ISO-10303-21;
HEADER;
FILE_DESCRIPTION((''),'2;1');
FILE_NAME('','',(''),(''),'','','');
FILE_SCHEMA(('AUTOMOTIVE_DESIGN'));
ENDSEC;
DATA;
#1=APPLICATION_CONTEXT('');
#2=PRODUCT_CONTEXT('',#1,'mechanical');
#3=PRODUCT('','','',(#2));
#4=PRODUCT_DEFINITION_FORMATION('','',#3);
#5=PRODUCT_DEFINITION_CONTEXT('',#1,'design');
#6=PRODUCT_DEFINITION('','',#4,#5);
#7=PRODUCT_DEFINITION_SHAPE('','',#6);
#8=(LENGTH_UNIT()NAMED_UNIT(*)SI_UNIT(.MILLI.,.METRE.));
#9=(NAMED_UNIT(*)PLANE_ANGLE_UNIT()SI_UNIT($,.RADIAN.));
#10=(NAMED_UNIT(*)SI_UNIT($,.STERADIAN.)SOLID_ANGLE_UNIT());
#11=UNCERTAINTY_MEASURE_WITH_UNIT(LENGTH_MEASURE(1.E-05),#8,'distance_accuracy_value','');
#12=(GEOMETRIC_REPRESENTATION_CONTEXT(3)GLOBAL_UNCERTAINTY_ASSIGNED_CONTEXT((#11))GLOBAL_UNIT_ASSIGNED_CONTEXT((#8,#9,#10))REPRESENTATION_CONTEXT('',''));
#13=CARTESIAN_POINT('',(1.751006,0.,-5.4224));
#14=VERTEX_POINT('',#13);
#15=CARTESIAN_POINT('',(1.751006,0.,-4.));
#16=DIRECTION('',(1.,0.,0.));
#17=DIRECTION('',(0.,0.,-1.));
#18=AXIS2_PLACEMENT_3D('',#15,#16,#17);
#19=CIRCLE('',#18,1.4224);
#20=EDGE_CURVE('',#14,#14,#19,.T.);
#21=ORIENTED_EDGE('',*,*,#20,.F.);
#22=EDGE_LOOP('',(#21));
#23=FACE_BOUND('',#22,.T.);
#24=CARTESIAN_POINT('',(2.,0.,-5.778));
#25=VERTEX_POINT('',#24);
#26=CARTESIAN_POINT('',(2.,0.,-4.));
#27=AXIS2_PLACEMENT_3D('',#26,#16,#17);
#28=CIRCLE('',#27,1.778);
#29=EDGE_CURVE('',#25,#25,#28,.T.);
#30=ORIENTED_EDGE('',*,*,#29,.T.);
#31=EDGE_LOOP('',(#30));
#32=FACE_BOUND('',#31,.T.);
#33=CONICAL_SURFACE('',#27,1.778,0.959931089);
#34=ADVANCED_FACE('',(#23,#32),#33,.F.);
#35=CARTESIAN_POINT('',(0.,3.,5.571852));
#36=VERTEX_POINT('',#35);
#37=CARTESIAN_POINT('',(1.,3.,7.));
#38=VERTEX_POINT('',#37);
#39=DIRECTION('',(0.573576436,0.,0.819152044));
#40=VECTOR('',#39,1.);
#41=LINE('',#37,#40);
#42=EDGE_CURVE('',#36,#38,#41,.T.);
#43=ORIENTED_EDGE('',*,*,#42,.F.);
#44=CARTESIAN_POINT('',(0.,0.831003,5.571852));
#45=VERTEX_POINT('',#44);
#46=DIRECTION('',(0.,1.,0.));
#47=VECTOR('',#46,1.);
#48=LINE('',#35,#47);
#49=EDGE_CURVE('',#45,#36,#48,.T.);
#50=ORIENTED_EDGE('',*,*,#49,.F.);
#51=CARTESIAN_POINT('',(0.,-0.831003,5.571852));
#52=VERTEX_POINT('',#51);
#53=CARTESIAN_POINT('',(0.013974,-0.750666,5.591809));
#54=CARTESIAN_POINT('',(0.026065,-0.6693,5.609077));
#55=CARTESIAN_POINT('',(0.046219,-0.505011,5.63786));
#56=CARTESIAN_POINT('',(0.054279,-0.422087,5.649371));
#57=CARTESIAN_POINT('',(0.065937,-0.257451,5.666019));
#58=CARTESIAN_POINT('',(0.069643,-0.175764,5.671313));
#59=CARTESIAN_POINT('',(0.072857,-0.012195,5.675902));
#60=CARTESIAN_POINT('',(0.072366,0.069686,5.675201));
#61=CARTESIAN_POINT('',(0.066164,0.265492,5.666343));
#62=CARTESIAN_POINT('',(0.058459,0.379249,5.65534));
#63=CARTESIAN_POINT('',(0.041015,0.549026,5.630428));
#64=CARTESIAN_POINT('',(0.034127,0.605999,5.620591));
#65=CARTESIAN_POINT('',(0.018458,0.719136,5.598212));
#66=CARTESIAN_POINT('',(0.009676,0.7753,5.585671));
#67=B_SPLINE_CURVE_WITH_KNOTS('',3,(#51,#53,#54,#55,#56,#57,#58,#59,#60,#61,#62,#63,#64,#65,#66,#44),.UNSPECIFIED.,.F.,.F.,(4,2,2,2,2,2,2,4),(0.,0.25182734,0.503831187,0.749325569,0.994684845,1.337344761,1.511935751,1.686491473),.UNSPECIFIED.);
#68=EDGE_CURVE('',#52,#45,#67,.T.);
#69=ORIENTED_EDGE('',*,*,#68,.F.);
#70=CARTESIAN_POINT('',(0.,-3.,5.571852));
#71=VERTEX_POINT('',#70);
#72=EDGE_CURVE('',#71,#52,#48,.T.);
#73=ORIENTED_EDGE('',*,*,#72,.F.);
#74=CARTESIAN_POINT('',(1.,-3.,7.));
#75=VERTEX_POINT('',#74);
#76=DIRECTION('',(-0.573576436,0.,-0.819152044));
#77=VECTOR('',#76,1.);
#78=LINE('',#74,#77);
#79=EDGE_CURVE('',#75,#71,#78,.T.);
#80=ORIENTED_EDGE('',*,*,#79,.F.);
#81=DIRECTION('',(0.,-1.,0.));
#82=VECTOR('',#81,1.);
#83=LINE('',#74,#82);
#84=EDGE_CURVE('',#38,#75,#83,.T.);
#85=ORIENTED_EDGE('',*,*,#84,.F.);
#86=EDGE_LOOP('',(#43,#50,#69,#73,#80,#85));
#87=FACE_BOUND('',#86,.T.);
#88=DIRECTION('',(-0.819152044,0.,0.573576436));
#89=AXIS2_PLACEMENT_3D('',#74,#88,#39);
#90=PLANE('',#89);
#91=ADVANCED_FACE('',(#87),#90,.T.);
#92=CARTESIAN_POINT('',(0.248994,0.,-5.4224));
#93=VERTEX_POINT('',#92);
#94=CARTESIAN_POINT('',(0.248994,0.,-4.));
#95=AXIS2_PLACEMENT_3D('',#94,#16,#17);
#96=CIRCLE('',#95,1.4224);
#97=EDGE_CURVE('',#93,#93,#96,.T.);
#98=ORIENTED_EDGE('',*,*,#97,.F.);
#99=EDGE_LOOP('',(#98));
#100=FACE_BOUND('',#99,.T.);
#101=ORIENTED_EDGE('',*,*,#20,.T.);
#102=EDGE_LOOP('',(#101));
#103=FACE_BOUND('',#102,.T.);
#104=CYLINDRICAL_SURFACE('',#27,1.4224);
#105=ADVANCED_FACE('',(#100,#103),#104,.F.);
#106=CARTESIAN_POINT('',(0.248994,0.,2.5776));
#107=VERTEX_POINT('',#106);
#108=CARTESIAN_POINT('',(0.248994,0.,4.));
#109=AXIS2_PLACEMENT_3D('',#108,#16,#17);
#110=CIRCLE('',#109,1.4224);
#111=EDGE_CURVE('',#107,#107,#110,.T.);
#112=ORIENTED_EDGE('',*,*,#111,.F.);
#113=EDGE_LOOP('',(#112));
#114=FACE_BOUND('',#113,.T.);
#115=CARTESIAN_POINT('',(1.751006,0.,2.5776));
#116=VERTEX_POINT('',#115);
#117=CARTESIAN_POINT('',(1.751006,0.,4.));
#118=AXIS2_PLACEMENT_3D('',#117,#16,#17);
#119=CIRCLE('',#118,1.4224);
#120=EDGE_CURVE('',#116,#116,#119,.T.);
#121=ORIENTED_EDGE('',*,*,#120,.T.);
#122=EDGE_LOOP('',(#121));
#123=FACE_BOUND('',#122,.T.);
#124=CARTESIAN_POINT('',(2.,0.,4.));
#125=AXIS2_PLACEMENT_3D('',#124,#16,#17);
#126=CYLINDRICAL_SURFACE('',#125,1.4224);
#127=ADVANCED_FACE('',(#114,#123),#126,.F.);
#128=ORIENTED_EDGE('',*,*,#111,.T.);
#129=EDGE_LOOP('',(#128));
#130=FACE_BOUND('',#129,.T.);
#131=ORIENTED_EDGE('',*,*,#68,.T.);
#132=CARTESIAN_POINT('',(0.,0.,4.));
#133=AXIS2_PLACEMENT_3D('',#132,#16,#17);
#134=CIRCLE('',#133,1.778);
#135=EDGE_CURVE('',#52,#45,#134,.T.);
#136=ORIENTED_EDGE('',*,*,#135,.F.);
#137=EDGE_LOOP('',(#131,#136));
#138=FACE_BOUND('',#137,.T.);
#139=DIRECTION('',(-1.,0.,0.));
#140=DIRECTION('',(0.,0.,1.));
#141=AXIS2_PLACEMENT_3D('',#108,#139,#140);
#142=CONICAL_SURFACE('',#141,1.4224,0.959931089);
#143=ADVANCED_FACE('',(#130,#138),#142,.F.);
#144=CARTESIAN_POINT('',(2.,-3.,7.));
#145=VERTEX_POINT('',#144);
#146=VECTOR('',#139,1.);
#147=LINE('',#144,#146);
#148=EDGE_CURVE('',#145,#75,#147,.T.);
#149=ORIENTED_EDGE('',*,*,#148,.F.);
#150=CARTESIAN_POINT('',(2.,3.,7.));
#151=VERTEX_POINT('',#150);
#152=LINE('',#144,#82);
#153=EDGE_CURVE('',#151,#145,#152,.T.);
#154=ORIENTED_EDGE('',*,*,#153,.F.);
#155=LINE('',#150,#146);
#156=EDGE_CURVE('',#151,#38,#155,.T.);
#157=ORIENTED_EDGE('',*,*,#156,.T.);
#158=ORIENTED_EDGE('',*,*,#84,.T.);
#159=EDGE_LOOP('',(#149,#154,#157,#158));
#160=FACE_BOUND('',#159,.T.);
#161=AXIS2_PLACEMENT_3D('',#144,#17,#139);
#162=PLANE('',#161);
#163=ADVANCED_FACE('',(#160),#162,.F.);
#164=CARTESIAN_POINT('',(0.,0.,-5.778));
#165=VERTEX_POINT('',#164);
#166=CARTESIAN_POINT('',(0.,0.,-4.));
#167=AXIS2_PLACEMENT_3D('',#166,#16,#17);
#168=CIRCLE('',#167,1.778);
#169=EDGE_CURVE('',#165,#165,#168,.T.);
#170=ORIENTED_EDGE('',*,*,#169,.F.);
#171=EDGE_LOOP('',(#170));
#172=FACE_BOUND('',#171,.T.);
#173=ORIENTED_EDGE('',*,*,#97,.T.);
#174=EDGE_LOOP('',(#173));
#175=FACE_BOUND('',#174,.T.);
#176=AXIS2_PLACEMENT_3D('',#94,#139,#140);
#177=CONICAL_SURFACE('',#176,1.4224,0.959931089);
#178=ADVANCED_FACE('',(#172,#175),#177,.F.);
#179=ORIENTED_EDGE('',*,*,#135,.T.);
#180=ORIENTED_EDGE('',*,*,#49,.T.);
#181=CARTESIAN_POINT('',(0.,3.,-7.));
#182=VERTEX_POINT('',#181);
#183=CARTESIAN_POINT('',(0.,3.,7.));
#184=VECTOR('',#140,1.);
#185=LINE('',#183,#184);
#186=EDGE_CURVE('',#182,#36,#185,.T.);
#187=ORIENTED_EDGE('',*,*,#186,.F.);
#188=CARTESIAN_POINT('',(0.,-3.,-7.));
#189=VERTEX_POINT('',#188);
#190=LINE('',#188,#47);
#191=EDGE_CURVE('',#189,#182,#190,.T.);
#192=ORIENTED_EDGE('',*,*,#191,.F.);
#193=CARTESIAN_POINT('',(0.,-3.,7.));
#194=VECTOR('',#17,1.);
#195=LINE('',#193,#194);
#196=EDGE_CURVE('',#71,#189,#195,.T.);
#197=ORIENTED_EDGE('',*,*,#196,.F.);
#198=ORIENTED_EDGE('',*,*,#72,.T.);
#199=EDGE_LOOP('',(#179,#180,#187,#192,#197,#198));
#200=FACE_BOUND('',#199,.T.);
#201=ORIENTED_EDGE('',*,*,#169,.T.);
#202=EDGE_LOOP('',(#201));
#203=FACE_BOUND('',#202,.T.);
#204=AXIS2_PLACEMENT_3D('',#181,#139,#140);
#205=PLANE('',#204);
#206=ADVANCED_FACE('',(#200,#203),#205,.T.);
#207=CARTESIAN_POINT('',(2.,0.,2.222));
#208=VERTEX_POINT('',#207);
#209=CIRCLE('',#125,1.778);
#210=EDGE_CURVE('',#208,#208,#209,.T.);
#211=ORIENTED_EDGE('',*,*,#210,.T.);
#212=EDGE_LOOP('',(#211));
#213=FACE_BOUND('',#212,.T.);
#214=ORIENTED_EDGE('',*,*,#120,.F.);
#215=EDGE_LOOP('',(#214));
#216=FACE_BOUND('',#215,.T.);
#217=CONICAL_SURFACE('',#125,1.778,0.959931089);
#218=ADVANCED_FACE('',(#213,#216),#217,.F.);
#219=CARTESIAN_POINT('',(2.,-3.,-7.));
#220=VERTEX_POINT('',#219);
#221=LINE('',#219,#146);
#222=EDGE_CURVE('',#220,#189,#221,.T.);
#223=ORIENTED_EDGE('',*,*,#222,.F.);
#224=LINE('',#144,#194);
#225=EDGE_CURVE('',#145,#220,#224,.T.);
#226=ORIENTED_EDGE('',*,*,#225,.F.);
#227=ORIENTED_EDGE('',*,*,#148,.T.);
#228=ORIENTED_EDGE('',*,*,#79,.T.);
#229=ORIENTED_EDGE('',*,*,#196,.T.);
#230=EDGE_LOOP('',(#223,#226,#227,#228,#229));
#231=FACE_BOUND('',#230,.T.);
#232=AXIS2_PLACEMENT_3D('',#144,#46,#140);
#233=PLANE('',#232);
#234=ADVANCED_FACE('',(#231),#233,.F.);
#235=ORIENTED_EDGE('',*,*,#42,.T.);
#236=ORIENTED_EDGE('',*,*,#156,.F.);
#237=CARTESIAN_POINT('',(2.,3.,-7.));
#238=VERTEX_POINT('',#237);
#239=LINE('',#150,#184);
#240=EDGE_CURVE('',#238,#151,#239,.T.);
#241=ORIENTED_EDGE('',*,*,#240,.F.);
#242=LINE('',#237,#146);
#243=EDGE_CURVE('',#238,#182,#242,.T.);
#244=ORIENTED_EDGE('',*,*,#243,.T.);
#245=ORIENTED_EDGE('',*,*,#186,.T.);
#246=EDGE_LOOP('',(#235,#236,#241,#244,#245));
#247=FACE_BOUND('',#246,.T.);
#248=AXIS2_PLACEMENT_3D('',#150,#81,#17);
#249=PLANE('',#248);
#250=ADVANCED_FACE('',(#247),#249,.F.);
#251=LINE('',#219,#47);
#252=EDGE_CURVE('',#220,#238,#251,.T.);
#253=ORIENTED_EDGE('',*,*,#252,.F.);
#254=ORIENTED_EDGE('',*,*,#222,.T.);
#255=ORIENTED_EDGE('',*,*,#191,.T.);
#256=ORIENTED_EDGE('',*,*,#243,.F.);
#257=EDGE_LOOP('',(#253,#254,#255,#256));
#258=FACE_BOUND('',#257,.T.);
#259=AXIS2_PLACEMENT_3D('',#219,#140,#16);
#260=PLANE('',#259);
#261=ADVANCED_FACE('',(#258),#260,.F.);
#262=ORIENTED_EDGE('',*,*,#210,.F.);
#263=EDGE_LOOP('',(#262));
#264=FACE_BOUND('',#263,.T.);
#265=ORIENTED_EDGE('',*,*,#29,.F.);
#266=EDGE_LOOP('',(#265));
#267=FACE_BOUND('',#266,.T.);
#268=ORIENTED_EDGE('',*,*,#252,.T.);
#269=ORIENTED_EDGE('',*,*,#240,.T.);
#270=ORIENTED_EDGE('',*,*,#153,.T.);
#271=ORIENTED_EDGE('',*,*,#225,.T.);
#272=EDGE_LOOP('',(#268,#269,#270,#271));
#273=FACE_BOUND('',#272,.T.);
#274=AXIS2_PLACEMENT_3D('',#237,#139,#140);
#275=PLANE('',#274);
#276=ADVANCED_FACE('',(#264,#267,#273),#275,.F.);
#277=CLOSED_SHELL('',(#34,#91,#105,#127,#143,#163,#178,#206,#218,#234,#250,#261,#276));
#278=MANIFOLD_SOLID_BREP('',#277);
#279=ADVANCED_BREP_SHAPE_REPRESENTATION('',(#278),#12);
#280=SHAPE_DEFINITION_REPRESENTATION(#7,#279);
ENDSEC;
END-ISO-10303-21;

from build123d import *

# Parameters (mm, degrees)
SKETCH_1_W                   = 14
SKETCH_1_H                   = 6
EXTRUDE_1_DEPTH              = 2
HOLE_WIZARD_4_401_AT_2_COUNT = 2
HOLE_WIZARD_4_401_AT_2_PITCH = 8
CHAMFER_1_SIZE               = 1
CHAMFER_1_SIZE_2             = 1.428148007


with BuildPart() as part:
    # Эскиз1 → Бобышка-Вытянуть1 (new body)
    with BuildSketch(Plane(origin=(0, 0, 0), x_dir=(0, 0, -1), z_dir=(1, 0, 0))):
        Rectangle(SKETCH_1_W, SKETCH_1_H)
    extrude(amount=EXTRUDE_1_DEPTH)

    # Эскиз4 → Отверстие обработанное метчиком #4-401 (revolve, cut)
    with BuildSketch(Plane(origin=(2, 0, 4), x_dir=(0, 0, -1), z_dir=(0, 1, 0))):
        Polygon((0, 0), (0, 2), (1.778, 2), (1.4224, 1.751006199), (1.4224, 0.248993801), (1.778, 0), align=None)
    hole_wizard_4_401 = revolve(axis=Axis((8.35, 0, 4), (-1, 0, 0)), mode=Mode.SUBTRACT)

    # Отверстие обработанное метчиком #4-401 at 2: Отверстие обработанное метчиком #4-401 ×2
    with Locations(*[(0, 0, -i * HOLE_WIZARD_4_401_AT_2_PITCH) for i in range(1, HOLE_WIZARD_4_401_AT_2_COUNT)]):
        add(hole_wizard_4_401, mode=Mode.SUBTRACT)

    # Фаска1
    # the kernel refuses this chamfer: 1.428148007, 1 mm, written as the material it takes off along each edge
    with BuildSketch(Plane(origin=(0, 6.68826682, 7), x_dir=(0.9989750717851554, 0, 0.04526373771402103), z_dir=(0, -1, 0))) as chamfer_1_piece_1:
        Polygon((CHAMFER_1_SIZE * 0.998975071785, -CHAMFER_1_SIZE * 0.045263737714), (-CHAMFER_1_SIZE_2 * 0.0452637377058, -CHAMFER_1_SIZE_2 * 0.998975071605), (0, 0), align=None)
    extrude(amount=13.37653364, mode=Mode.SUBTRACT)


solid = part.part
